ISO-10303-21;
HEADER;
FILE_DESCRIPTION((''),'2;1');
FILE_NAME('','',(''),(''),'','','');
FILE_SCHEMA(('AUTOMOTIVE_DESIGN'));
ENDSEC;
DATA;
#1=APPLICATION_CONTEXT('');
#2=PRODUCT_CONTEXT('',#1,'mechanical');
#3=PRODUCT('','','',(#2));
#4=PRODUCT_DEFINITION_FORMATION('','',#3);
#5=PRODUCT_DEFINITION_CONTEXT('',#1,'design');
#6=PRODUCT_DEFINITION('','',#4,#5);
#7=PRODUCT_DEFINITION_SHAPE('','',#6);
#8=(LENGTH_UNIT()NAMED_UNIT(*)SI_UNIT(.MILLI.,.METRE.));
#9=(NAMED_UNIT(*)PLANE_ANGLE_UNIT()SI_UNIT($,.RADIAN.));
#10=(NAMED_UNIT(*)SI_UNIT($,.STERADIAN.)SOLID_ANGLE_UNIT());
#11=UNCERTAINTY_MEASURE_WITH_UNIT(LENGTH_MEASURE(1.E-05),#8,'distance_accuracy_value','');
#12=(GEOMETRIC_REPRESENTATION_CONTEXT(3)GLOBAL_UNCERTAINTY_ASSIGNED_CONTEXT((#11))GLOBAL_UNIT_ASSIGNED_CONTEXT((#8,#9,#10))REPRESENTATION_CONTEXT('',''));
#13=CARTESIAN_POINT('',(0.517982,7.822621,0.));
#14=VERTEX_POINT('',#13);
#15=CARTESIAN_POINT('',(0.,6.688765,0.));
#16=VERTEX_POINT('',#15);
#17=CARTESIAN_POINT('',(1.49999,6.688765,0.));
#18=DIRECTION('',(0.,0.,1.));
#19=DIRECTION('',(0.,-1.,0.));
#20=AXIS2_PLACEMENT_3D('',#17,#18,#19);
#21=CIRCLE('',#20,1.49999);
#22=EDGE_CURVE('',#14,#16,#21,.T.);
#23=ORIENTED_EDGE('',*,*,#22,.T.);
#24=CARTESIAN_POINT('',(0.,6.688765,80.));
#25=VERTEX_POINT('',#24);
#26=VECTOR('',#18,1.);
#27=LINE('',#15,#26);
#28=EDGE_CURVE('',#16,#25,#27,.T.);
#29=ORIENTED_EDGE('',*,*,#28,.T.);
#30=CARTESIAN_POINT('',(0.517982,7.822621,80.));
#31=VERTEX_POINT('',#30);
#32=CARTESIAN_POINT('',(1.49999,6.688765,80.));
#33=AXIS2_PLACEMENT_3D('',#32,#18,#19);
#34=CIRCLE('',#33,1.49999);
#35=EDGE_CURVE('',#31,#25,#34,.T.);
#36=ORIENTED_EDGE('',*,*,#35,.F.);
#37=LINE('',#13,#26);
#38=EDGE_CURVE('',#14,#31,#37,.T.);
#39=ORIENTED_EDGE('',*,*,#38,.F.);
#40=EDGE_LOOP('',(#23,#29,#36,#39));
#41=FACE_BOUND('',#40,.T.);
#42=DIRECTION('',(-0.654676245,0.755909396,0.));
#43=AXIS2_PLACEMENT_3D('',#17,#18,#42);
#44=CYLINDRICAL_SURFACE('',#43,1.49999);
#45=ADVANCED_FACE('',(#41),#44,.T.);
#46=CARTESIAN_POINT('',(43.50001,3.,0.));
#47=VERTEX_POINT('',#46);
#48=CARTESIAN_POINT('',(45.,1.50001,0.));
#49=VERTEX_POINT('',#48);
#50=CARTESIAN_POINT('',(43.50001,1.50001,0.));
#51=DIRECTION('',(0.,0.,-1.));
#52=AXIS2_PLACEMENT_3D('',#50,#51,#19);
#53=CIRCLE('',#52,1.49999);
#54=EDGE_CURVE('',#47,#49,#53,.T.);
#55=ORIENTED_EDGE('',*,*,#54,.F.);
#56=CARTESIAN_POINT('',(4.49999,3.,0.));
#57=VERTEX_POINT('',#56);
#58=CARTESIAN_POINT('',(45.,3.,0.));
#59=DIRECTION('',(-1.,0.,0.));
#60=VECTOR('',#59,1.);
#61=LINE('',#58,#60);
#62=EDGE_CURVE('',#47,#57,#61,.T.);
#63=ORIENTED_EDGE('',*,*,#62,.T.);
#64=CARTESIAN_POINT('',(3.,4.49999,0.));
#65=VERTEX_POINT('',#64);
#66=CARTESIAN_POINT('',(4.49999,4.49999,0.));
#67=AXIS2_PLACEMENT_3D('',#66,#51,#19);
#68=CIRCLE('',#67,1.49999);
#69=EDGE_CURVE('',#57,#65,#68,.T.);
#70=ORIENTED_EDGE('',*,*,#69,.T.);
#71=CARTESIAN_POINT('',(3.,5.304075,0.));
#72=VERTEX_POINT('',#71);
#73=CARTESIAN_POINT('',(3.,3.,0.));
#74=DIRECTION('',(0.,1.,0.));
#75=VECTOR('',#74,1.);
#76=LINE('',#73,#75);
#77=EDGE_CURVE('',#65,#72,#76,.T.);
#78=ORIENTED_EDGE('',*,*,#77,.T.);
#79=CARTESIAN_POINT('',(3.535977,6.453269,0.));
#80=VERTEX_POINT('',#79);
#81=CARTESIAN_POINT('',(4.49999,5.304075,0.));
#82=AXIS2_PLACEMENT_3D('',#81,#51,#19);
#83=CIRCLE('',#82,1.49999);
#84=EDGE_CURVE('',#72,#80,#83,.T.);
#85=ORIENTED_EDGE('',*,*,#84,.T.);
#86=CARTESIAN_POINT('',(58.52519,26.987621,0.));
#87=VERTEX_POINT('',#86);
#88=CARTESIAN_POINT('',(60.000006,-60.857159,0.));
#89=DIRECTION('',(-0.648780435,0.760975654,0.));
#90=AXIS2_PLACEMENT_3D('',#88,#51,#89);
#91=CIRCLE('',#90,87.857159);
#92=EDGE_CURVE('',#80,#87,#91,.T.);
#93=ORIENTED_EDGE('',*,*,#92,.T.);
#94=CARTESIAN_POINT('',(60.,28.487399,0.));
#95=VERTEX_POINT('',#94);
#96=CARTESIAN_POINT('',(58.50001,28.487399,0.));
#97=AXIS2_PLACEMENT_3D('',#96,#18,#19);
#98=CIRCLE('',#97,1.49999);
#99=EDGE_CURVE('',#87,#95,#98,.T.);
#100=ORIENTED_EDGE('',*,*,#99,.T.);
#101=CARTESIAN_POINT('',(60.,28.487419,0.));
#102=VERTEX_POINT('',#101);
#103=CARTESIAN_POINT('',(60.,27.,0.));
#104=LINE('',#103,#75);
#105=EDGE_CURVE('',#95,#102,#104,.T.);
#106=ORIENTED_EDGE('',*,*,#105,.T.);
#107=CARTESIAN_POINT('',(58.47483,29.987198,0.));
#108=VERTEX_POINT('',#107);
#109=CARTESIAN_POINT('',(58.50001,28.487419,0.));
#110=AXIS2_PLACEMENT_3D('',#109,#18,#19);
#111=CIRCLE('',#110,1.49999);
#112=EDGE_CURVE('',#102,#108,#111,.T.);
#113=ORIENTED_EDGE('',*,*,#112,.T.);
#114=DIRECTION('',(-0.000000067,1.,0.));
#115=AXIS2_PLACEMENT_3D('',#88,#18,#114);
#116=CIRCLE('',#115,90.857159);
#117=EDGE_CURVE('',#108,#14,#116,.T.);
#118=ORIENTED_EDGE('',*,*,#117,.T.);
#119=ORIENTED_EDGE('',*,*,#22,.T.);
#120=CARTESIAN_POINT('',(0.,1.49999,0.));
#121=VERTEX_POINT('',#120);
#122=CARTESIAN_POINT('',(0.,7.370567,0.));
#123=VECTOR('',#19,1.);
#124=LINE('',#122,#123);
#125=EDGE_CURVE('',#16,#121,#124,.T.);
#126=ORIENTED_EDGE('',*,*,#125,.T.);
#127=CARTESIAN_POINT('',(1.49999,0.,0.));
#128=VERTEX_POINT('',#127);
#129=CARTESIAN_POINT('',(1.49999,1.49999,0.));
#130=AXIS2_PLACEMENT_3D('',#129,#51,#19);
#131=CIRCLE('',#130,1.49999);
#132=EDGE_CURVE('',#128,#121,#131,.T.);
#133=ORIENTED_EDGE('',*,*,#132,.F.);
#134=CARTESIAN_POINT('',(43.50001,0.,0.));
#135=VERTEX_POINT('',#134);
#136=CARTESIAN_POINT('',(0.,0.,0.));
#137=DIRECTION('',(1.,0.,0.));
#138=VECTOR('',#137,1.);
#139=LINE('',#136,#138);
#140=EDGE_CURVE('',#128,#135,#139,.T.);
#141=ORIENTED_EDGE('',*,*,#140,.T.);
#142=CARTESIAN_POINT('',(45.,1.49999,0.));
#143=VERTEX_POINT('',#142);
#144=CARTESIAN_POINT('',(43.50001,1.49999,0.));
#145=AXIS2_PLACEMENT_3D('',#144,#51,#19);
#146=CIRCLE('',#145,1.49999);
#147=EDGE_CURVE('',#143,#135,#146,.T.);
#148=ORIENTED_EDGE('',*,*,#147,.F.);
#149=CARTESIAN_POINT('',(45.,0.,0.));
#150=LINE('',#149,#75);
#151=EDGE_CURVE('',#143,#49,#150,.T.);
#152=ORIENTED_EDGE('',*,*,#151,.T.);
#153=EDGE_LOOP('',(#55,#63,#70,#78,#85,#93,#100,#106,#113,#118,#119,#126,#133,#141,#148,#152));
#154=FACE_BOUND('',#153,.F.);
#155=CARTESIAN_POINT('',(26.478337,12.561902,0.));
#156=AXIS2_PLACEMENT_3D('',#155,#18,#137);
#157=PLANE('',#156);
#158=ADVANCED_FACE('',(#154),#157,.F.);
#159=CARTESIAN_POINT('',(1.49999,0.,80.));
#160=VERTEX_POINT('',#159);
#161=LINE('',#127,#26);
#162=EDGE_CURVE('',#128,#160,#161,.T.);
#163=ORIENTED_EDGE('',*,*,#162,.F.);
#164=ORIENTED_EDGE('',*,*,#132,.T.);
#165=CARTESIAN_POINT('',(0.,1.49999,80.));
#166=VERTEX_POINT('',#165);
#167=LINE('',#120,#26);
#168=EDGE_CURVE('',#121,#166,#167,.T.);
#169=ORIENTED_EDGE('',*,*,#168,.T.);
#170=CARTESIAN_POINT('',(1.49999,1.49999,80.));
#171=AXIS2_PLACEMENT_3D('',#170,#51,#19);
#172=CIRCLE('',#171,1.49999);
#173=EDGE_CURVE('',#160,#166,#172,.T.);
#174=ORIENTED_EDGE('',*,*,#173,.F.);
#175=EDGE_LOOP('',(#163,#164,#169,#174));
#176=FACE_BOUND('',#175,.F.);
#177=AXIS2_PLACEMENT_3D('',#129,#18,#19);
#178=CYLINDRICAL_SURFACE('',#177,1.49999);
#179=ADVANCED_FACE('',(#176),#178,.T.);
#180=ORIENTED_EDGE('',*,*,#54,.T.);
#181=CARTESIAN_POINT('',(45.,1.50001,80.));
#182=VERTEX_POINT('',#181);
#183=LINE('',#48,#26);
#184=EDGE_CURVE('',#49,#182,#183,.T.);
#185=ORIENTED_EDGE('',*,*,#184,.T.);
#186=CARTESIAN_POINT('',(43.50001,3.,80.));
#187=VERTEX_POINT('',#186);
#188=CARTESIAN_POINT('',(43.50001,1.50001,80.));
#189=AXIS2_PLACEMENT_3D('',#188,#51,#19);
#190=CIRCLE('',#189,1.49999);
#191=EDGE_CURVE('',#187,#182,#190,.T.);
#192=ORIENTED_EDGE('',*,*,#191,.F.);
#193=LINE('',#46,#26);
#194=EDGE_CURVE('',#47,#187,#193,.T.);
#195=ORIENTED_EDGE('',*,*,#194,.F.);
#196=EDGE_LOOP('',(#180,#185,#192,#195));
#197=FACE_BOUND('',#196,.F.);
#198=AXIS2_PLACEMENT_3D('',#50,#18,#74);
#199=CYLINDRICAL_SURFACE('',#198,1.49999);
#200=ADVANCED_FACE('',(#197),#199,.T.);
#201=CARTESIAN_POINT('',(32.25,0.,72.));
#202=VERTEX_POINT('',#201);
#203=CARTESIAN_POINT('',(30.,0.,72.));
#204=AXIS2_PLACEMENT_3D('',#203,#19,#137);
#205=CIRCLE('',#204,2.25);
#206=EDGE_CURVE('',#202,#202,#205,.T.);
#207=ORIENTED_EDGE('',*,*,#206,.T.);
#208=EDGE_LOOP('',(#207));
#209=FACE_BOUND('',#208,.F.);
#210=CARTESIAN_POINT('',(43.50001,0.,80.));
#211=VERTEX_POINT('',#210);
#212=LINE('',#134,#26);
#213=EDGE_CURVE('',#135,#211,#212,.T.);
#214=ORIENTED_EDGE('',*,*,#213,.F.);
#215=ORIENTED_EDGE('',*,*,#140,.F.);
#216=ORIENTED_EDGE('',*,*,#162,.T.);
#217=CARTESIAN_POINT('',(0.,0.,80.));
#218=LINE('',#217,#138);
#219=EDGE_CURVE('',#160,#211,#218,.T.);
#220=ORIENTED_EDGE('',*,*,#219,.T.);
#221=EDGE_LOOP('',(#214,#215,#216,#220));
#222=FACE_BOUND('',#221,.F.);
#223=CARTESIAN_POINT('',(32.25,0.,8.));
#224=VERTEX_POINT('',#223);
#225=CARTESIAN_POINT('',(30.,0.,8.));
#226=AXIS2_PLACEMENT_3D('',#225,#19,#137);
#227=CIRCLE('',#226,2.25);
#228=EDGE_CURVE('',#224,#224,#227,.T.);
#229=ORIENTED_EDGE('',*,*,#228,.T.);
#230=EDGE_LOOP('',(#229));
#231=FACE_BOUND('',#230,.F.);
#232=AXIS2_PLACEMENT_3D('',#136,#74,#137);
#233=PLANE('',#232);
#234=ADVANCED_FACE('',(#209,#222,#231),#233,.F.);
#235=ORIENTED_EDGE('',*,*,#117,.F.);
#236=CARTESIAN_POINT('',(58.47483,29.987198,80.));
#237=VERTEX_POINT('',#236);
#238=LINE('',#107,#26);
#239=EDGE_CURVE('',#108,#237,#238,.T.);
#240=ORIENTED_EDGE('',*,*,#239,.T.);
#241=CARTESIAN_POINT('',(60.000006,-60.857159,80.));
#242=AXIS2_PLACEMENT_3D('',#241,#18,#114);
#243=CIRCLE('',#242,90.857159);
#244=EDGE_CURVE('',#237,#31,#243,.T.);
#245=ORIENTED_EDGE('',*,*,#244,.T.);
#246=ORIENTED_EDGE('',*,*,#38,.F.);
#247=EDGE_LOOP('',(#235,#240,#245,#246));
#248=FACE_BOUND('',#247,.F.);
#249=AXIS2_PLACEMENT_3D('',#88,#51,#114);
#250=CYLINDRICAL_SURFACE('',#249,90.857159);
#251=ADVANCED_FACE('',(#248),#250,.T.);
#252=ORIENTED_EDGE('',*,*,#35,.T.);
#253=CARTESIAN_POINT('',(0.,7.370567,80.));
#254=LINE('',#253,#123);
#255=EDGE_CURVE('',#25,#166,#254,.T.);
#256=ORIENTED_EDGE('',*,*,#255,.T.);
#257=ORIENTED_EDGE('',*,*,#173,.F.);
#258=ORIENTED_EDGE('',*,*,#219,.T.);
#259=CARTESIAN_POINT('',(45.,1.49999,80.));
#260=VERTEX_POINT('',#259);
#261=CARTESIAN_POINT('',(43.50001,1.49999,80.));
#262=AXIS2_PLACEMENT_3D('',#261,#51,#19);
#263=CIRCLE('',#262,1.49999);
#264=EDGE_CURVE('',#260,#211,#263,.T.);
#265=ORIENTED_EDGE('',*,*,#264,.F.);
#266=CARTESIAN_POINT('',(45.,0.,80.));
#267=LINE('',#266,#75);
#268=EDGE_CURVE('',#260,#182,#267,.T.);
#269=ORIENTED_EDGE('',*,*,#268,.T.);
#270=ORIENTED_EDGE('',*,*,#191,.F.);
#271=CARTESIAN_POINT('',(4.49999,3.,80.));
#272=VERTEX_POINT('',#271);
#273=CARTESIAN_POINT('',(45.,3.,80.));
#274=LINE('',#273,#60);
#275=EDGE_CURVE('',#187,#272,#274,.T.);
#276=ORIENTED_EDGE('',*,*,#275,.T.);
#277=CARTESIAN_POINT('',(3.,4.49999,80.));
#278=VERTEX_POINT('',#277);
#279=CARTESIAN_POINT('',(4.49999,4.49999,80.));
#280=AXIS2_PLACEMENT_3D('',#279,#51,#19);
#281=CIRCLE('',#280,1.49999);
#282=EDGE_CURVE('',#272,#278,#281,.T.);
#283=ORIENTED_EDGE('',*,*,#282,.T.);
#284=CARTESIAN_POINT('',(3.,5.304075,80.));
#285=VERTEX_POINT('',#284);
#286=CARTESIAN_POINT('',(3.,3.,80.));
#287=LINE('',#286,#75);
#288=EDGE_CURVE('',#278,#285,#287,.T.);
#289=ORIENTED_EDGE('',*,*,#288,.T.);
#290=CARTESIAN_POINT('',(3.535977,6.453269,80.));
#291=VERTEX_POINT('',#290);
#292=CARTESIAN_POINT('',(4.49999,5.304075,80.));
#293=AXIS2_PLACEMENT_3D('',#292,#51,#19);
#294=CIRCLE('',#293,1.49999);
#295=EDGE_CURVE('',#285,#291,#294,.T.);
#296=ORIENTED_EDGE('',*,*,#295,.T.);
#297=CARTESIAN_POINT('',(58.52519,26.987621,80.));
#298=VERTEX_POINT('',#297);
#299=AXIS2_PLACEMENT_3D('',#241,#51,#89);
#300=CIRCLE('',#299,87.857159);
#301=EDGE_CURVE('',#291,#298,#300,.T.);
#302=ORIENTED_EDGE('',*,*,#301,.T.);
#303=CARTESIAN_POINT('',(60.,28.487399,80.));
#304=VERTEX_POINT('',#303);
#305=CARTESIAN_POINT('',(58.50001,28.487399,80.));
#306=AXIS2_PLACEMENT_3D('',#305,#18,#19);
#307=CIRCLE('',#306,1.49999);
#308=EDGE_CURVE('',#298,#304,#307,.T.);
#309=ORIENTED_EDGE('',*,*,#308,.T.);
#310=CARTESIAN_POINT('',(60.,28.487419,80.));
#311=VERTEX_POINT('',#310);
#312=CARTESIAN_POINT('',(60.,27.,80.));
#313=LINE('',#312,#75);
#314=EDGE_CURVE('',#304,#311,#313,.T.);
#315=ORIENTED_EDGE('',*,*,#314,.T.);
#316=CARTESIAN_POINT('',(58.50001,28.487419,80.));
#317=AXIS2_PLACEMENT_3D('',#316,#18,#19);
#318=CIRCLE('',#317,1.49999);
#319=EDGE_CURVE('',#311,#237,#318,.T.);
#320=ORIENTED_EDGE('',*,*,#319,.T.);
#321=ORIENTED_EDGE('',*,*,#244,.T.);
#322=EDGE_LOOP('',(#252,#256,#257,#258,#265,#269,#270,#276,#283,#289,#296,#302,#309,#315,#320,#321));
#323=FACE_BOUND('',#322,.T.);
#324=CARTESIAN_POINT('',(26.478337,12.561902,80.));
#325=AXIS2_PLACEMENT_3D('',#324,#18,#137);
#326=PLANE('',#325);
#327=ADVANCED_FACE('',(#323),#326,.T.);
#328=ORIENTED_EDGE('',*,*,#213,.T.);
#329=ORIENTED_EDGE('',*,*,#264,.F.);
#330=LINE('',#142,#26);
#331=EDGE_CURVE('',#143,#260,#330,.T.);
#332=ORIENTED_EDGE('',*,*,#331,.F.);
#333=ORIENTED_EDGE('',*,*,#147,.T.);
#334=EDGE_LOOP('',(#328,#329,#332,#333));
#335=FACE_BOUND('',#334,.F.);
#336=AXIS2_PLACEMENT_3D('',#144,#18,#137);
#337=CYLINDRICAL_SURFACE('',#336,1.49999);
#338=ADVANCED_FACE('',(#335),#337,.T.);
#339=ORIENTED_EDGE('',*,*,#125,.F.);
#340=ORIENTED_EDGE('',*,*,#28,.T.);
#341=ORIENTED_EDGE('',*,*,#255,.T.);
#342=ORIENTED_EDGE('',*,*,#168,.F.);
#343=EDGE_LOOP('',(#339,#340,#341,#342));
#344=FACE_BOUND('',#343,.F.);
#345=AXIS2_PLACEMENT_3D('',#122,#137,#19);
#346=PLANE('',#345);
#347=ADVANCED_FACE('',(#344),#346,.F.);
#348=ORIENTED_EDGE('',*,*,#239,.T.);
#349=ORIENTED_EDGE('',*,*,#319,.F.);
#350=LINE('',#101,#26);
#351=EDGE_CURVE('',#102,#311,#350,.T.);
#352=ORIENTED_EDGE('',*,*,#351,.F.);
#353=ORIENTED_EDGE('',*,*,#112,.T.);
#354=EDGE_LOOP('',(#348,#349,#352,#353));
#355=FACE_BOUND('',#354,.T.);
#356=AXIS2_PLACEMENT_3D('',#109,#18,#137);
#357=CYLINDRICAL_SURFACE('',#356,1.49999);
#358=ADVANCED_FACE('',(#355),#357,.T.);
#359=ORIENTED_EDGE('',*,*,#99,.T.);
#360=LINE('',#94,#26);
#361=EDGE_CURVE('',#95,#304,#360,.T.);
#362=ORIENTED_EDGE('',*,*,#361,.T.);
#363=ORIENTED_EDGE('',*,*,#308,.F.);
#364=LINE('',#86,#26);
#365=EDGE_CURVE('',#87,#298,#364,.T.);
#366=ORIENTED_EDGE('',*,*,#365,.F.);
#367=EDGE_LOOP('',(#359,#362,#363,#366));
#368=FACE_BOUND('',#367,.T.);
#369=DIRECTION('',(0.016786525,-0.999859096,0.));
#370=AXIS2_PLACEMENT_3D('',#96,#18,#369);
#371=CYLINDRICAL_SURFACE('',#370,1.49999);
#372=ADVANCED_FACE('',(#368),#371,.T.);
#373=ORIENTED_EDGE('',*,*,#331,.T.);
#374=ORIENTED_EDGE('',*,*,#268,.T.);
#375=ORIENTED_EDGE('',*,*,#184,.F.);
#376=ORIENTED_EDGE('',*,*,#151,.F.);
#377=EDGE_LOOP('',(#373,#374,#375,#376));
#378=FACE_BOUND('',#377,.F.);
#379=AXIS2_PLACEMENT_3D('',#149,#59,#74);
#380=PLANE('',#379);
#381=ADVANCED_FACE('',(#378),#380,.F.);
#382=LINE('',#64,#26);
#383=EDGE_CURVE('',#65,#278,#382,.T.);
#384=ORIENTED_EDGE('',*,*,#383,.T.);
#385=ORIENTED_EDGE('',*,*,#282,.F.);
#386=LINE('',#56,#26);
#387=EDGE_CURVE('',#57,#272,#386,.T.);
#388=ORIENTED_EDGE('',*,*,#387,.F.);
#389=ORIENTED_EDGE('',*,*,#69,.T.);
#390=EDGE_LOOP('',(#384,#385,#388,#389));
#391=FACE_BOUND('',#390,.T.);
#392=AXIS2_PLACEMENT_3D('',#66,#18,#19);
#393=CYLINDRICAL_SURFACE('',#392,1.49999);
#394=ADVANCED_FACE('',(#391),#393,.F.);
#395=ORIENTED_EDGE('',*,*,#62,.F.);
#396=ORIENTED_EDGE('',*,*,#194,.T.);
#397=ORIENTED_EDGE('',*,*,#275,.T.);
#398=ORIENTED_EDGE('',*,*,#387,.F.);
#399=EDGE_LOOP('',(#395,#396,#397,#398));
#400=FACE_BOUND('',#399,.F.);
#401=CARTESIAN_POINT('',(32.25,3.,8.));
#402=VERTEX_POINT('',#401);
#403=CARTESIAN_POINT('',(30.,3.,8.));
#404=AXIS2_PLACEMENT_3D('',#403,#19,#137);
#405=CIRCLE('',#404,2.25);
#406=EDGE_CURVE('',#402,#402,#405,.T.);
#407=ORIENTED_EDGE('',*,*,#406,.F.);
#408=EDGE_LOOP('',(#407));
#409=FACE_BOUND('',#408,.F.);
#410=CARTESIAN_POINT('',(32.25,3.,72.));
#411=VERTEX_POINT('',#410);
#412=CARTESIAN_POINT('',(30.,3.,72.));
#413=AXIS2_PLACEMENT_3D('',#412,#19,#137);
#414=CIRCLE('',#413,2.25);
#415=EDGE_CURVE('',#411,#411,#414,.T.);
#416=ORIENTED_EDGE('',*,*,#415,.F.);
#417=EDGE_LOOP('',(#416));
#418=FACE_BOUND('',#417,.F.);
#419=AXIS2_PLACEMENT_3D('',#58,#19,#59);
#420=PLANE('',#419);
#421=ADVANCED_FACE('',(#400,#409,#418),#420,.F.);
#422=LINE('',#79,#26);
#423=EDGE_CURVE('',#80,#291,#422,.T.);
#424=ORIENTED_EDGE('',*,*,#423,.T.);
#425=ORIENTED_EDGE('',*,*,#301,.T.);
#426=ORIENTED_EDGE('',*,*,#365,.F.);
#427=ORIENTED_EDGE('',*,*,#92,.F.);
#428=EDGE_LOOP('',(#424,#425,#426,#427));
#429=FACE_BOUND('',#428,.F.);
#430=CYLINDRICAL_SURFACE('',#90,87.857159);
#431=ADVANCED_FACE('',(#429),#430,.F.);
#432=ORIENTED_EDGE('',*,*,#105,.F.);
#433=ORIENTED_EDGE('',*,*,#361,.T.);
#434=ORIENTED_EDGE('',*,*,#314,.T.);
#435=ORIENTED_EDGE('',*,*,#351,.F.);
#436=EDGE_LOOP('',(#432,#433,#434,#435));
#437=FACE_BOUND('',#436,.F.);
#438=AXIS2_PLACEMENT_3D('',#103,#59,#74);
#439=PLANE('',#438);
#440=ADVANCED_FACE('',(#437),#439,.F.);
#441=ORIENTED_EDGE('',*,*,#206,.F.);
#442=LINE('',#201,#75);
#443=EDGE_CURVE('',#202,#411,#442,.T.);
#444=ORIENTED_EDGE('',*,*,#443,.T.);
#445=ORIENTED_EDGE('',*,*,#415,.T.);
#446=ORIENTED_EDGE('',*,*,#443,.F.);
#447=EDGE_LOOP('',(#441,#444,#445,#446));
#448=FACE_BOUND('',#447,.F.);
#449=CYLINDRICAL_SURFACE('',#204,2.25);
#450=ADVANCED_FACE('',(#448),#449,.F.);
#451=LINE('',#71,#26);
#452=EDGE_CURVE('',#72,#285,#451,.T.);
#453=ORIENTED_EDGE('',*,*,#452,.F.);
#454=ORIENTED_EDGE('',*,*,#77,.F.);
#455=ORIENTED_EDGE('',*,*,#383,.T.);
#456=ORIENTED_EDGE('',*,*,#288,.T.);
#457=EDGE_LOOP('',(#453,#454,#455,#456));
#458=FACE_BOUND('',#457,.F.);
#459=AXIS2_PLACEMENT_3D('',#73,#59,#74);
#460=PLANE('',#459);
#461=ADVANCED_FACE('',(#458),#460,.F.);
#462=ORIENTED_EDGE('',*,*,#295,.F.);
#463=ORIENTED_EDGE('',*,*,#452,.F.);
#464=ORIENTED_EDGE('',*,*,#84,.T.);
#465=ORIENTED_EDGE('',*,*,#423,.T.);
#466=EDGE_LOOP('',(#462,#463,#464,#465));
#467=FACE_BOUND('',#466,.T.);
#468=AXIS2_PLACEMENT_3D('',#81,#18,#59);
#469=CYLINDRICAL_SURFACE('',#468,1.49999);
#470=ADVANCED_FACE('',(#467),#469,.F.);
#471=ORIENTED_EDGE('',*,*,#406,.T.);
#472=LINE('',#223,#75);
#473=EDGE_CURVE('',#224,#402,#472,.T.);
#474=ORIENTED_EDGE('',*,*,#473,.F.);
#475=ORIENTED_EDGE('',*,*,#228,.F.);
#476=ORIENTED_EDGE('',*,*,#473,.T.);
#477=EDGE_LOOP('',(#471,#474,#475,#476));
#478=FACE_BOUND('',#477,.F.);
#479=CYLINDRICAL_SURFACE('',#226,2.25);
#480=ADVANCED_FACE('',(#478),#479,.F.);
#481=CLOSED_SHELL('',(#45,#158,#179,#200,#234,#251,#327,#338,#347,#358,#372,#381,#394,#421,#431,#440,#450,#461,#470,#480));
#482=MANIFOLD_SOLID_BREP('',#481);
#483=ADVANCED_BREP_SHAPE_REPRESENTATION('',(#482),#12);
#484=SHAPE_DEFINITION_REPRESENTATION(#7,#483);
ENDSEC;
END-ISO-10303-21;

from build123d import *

# Parameters (mm, degrees)
F1_DEPTH = 80
F2_R     = 2.25
F3_DEPTH = 3
F4_R     = 1.49999


# Not quite as in the source:
# - a fillet or chamfer is up to 0.001 mm smaller than in the source, because OpenCascade refuses the exact size
# - a feature names something its author has since deleted; it is built from what else it names


with BuildPart() as f1:
    # F0 (on Top) → F1 (new body)
    with BuildSketch(Plane.XY):
        with BuildLine():
            Line((45, 3), (3, 3))
            Line((3, 3), (3, 6))
            ThreePointArc((3, 6), (29.6273152762, 21.5830013932), (60, 27))
            Line((60, 27), (60, 30))
            ThreePointArc((60, 30), (27.9372056463, 24.1546059211), (0, 7.3705672421))
            Line((0, 7.3705672421), (0, 0))
            Line((0, 0), (45, 0))
            Line((45, 0), (45, 3))
        make_face()
    extrude(amount=F1_DEPTH)

    # F2 (on face) → F3 (cut, through all)
    with BuildSketch(Plane.XZ):
        with Locations((30, 72)):
            Circle(F2_R)
        with Locations((30, 8)):
            Circle(F2_R)
    extrude(amount=-F3_DEPTH, mode=Mode.SUBTRACT)

    # F4 (radius 1.5 in the source; OpenCascade refuses exactly that, so slightly less here)
    f4_edges = [f1.edges().sort_by_distance(p)[0] for p in [
        (45, 0, 40),
        (45, 3, 40),
        (0, 0, 40),
        (0, 7.370567, 40),
        (60, 30, 40),
        (60, 27, 40),
        (3, 3, 40),
        (3, 6, 40),
    ]]
    fillet(f4_edges, radius=F4_R)


solid = f1.part
